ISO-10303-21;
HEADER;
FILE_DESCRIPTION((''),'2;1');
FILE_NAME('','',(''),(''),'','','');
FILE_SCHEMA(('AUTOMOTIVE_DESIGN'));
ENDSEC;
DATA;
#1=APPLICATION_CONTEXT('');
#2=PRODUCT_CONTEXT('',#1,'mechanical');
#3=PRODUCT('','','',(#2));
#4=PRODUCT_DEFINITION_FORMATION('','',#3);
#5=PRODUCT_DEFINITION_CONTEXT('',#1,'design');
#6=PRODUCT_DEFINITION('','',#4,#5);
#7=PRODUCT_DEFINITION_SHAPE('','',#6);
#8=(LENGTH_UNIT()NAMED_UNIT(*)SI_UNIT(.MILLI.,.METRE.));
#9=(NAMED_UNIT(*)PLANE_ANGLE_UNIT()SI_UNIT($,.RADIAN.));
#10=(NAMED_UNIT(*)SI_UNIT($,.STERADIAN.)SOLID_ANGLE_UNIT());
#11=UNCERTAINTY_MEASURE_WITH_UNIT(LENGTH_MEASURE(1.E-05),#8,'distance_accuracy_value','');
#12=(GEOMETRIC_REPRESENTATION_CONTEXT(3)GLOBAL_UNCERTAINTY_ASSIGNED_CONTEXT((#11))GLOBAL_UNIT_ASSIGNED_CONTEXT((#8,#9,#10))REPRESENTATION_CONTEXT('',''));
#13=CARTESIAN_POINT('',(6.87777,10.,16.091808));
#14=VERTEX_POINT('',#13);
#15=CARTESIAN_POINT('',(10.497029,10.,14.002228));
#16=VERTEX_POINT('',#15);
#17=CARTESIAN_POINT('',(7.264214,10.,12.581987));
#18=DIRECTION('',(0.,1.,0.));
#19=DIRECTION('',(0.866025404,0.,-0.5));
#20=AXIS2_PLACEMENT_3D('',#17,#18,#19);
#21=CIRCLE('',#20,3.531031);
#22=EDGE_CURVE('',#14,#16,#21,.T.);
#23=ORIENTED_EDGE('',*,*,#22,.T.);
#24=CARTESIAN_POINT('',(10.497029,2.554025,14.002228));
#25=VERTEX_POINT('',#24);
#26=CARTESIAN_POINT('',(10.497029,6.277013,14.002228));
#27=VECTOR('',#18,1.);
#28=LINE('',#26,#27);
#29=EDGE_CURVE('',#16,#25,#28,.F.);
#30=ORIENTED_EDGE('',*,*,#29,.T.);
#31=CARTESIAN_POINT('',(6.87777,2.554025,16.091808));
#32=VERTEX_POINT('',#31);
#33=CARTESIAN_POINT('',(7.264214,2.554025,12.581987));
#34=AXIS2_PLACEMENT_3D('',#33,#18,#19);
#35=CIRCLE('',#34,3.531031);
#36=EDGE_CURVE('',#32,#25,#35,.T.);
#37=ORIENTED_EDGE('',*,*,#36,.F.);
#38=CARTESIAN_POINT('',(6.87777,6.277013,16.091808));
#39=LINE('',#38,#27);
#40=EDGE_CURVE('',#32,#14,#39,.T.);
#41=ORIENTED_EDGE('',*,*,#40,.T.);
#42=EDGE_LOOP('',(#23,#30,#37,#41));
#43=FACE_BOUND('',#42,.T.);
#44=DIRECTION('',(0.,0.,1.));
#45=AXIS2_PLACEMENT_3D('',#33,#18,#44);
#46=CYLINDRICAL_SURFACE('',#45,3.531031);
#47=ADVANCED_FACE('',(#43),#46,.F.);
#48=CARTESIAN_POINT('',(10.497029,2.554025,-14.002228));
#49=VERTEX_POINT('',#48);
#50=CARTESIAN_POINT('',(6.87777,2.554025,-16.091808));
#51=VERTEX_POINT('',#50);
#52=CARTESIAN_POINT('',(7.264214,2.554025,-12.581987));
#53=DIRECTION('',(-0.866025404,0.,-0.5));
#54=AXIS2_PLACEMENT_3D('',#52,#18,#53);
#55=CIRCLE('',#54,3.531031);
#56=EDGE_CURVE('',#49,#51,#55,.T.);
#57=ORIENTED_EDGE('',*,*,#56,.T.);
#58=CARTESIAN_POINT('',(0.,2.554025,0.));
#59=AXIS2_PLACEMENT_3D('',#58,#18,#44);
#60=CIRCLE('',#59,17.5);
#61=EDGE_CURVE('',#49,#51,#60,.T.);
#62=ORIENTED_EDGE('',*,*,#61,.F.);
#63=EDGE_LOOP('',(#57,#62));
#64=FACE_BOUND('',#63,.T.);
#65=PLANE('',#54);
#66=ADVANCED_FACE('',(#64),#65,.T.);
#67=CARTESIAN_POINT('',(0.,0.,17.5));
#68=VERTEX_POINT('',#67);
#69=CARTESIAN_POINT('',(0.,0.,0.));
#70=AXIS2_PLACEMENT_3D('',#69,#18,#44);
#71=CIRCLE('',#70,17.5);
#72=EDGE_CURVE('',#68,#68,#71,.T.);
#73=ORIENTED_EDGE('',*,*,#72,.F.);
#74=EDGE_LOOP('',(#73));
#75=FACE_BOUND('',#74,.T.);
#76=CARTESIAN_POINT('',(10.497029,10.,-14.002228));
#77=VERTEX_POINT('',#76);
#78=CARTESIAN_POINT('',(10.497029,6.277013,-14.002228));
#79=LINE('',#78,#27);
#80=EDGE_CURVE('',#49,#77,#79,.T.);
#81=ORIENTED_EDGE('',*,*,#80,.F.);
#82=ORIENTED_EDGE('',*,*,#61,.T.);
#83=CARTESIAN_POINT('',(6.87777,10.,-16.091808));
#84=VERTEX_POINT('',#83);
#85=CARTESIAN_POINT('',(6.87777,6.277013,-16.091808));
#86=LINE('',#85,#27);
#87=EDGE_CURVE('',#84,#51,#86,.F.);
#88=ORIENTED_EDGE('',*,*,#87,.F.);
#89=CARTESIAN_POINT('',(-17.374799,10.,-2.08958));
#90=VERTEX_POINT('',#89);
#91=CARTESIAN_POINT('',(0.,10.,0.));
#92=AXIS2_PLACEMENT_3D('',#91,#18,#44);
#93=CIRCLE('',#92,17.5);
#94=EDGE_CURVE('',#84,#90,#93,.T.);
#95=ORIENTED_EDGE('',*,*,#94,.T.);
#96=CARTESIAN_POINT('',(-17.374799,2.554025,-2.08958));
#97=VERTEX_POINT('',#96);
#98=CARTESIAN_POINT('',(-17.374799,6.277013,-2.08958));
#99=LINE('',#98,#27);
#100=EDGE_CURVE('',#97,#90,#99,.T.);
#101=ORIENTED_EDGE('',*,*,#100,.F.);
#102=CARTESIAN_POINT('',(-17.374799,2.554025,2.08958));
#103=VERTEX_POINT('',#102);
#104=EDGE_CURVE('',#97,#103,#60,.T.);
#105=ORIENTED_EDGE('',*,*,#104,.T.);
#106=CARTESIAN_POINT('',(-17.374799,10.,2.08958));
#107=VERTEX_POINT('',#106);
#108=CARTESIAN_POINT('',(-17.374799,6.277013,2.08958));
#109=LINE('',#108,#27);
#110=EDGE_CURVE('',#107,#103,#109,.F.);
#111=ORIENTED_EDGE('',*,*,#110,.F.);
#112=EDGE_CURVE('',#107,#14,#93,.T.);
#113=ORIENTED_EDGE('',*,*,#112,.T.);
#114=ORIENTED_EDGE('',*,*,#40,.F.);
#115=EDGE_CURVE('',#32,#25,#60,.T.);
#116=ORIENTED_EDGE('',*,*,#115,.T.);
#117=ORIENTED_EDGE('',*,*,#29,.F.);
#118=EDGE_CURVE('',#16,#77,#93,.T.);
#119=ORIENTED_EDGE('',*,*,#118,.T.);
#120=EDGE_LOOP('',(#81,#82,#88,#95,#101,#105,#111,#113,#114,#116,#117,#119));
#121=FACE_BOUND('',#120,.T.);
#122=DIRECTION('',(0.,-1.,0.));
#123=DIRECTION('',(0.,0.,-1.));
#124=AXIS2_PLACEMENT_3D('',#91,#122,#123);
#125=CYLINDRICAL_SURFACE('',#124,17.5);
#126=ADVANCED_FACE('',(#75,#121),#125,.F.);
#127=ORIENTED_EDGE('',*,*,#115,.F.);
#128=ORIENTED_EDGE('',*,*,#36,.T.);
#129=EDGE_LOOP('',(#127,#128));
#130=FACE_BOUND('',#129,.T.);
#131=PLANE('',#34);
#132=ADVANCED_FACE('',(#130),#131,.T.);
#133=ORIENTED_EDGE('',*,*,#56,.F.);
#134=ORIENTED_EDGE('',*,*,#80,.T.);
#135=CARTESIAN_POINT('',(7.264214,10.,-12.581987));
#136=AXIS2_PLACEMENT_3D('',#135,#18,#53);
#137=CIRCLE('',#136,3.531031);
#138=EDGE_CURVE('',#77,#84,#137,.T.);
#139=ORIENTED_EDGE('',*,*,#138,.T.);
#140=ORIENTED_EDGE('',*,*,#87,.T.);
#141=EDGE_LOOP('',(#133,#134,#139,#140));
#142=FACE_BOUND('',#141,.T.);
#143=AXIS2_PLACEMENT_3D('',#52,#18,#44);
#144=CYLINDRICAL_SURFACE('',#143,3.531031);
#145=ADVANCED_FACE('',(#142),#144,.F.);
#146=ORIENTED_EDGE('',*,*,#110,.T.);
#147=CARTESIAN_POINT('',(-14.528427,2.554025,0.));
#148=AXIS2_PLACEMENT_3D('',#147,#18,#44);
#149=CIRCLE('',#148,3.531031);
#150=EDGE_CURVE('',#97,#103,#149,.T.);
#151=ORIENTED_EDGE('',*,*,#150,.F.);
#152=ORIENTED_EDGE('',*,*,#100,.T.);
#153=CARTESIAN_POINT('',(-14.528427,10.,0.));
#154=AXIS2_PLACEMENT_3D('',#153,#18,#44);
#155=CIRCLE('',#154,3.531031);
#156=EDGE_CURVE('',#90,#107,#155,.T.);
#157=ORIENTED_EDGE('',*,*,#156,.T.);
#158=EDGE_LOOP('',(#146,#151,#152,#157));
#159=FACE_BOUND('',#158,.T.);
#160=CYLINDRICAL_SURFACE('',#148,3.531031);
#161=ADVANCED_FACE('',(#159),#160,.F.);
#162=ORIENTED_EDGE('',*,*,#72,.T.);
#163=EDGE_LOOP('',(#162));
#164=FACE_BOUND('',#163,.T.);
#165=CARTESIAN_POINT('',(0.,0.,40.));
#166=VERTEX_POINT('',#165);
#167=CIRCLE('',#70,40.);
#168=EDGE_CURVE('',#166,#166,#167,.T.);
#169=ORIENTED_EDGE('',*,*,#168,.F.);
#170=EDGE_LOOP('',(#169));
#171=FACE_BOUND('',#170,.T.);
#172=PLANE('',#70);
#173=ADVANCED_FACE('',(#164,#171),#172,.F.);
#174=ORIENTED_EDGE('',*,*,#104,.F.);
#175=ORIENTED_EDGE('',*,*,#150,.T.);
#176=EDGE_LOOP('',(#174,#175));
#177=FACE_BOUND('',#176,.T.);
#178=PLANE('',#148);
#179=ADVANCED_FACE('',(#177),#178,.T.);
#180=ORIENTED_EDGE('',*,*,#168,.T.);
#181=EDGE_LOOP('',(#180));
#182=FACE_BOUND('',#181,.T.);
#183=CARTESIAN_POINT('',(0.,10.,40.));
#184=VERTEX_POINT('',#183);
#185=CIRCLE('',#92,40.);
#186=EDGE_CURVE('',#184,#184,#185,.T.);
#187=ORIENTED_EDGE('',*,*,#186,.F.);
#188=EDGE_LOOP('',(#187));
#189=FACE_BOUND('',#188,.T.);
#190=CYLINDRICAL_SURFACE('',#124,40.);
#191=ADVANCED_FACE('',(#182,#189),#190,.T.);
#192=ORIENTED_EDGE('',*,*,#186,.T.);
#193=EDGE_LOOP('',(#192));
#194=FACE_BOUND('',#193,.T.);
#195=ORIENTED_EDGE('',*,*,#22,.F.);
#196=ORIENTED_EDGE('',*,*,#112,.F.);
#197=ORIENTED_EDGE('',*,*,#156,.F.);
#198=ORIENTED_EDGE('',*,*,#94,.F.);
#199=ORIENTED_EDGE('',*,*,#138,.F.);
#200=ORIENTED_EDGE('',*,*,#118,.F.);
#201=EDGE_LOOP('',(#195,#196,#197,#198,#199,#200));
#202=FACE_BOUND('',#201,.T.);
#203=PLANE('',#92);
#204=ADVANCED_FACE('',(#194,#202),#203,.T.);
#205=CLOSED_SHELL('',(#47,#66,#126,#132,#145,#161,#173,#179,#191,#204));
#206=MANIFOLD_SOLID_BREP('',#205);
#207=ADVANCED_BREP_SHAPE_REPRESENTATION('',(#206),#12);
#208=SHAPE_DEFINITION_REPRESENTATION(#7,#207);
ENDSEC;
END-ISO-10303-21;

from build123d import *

# Parameters (mm, degrees)
SKETCH1_R           = 40
BOSS_EXTRUDE1_DEPTH = 10
SKETCH2_R           = 17.5
CUT_EXTRUDE1_DEPTH  = 58.445626465
SKETCH3_R           = 3.53103084
CUT_EXTRUDE2_DEPTH  = 7.445974988
CIRPATTERN1_COUNT   = 3


with BuildPart() as part:
    # Sketch1 → Boss-Extrude1 (new body)
    with BuildSketch(Plane(origin=(0, 0, 0), x_dir=(1, 0, 0), z_dir=(0, 1, 0))):
        Circle(SKETCH1_R)
    extrude(amount=BOSS_EXTRUDE1_DEPTH)

    # Sketch2 → Cut-Extrude1 (cut, through all)
    with BuildSketch(Plane(origin=(0, 0, 0), x_dir=(1, 0, 0), z_dir=(0, 1, 0))):
        Circle(SKETCH2_R)
    extrude(amount=CUT_EXTRUDE1_DEPTH, mode=Mode.SUBTRACT)

    # Sketch3 → Cut-Extrude2 (cut)
    with BuildSketch(Plane(origin=(0, 10, 0), x_dir=(1, 0, 0), z_dir=(0, 1, 0))):
        with Locations((-14.528427422, 0)):
            Circle(SKETCH3_R)
    cut_extrude2 = extrude(amount=-CUT_EXTRUDE2_DEPTH, mode=Mode.SUBTRACT)

    # CirPattern1: Cut-Extrude2 ×3 about axis
    cirpattern1_axis = Axis((0, 0, 0), (0, 1, 0))
    for i in range(1, CIRPATTERN1_COUNT):
        add(cut_extrude2.rotate(cirpattern1_axis, i * 360 / CIRPATTERN1_COUNT), mode=Mode.SUBTRACT)


solid = part.part
